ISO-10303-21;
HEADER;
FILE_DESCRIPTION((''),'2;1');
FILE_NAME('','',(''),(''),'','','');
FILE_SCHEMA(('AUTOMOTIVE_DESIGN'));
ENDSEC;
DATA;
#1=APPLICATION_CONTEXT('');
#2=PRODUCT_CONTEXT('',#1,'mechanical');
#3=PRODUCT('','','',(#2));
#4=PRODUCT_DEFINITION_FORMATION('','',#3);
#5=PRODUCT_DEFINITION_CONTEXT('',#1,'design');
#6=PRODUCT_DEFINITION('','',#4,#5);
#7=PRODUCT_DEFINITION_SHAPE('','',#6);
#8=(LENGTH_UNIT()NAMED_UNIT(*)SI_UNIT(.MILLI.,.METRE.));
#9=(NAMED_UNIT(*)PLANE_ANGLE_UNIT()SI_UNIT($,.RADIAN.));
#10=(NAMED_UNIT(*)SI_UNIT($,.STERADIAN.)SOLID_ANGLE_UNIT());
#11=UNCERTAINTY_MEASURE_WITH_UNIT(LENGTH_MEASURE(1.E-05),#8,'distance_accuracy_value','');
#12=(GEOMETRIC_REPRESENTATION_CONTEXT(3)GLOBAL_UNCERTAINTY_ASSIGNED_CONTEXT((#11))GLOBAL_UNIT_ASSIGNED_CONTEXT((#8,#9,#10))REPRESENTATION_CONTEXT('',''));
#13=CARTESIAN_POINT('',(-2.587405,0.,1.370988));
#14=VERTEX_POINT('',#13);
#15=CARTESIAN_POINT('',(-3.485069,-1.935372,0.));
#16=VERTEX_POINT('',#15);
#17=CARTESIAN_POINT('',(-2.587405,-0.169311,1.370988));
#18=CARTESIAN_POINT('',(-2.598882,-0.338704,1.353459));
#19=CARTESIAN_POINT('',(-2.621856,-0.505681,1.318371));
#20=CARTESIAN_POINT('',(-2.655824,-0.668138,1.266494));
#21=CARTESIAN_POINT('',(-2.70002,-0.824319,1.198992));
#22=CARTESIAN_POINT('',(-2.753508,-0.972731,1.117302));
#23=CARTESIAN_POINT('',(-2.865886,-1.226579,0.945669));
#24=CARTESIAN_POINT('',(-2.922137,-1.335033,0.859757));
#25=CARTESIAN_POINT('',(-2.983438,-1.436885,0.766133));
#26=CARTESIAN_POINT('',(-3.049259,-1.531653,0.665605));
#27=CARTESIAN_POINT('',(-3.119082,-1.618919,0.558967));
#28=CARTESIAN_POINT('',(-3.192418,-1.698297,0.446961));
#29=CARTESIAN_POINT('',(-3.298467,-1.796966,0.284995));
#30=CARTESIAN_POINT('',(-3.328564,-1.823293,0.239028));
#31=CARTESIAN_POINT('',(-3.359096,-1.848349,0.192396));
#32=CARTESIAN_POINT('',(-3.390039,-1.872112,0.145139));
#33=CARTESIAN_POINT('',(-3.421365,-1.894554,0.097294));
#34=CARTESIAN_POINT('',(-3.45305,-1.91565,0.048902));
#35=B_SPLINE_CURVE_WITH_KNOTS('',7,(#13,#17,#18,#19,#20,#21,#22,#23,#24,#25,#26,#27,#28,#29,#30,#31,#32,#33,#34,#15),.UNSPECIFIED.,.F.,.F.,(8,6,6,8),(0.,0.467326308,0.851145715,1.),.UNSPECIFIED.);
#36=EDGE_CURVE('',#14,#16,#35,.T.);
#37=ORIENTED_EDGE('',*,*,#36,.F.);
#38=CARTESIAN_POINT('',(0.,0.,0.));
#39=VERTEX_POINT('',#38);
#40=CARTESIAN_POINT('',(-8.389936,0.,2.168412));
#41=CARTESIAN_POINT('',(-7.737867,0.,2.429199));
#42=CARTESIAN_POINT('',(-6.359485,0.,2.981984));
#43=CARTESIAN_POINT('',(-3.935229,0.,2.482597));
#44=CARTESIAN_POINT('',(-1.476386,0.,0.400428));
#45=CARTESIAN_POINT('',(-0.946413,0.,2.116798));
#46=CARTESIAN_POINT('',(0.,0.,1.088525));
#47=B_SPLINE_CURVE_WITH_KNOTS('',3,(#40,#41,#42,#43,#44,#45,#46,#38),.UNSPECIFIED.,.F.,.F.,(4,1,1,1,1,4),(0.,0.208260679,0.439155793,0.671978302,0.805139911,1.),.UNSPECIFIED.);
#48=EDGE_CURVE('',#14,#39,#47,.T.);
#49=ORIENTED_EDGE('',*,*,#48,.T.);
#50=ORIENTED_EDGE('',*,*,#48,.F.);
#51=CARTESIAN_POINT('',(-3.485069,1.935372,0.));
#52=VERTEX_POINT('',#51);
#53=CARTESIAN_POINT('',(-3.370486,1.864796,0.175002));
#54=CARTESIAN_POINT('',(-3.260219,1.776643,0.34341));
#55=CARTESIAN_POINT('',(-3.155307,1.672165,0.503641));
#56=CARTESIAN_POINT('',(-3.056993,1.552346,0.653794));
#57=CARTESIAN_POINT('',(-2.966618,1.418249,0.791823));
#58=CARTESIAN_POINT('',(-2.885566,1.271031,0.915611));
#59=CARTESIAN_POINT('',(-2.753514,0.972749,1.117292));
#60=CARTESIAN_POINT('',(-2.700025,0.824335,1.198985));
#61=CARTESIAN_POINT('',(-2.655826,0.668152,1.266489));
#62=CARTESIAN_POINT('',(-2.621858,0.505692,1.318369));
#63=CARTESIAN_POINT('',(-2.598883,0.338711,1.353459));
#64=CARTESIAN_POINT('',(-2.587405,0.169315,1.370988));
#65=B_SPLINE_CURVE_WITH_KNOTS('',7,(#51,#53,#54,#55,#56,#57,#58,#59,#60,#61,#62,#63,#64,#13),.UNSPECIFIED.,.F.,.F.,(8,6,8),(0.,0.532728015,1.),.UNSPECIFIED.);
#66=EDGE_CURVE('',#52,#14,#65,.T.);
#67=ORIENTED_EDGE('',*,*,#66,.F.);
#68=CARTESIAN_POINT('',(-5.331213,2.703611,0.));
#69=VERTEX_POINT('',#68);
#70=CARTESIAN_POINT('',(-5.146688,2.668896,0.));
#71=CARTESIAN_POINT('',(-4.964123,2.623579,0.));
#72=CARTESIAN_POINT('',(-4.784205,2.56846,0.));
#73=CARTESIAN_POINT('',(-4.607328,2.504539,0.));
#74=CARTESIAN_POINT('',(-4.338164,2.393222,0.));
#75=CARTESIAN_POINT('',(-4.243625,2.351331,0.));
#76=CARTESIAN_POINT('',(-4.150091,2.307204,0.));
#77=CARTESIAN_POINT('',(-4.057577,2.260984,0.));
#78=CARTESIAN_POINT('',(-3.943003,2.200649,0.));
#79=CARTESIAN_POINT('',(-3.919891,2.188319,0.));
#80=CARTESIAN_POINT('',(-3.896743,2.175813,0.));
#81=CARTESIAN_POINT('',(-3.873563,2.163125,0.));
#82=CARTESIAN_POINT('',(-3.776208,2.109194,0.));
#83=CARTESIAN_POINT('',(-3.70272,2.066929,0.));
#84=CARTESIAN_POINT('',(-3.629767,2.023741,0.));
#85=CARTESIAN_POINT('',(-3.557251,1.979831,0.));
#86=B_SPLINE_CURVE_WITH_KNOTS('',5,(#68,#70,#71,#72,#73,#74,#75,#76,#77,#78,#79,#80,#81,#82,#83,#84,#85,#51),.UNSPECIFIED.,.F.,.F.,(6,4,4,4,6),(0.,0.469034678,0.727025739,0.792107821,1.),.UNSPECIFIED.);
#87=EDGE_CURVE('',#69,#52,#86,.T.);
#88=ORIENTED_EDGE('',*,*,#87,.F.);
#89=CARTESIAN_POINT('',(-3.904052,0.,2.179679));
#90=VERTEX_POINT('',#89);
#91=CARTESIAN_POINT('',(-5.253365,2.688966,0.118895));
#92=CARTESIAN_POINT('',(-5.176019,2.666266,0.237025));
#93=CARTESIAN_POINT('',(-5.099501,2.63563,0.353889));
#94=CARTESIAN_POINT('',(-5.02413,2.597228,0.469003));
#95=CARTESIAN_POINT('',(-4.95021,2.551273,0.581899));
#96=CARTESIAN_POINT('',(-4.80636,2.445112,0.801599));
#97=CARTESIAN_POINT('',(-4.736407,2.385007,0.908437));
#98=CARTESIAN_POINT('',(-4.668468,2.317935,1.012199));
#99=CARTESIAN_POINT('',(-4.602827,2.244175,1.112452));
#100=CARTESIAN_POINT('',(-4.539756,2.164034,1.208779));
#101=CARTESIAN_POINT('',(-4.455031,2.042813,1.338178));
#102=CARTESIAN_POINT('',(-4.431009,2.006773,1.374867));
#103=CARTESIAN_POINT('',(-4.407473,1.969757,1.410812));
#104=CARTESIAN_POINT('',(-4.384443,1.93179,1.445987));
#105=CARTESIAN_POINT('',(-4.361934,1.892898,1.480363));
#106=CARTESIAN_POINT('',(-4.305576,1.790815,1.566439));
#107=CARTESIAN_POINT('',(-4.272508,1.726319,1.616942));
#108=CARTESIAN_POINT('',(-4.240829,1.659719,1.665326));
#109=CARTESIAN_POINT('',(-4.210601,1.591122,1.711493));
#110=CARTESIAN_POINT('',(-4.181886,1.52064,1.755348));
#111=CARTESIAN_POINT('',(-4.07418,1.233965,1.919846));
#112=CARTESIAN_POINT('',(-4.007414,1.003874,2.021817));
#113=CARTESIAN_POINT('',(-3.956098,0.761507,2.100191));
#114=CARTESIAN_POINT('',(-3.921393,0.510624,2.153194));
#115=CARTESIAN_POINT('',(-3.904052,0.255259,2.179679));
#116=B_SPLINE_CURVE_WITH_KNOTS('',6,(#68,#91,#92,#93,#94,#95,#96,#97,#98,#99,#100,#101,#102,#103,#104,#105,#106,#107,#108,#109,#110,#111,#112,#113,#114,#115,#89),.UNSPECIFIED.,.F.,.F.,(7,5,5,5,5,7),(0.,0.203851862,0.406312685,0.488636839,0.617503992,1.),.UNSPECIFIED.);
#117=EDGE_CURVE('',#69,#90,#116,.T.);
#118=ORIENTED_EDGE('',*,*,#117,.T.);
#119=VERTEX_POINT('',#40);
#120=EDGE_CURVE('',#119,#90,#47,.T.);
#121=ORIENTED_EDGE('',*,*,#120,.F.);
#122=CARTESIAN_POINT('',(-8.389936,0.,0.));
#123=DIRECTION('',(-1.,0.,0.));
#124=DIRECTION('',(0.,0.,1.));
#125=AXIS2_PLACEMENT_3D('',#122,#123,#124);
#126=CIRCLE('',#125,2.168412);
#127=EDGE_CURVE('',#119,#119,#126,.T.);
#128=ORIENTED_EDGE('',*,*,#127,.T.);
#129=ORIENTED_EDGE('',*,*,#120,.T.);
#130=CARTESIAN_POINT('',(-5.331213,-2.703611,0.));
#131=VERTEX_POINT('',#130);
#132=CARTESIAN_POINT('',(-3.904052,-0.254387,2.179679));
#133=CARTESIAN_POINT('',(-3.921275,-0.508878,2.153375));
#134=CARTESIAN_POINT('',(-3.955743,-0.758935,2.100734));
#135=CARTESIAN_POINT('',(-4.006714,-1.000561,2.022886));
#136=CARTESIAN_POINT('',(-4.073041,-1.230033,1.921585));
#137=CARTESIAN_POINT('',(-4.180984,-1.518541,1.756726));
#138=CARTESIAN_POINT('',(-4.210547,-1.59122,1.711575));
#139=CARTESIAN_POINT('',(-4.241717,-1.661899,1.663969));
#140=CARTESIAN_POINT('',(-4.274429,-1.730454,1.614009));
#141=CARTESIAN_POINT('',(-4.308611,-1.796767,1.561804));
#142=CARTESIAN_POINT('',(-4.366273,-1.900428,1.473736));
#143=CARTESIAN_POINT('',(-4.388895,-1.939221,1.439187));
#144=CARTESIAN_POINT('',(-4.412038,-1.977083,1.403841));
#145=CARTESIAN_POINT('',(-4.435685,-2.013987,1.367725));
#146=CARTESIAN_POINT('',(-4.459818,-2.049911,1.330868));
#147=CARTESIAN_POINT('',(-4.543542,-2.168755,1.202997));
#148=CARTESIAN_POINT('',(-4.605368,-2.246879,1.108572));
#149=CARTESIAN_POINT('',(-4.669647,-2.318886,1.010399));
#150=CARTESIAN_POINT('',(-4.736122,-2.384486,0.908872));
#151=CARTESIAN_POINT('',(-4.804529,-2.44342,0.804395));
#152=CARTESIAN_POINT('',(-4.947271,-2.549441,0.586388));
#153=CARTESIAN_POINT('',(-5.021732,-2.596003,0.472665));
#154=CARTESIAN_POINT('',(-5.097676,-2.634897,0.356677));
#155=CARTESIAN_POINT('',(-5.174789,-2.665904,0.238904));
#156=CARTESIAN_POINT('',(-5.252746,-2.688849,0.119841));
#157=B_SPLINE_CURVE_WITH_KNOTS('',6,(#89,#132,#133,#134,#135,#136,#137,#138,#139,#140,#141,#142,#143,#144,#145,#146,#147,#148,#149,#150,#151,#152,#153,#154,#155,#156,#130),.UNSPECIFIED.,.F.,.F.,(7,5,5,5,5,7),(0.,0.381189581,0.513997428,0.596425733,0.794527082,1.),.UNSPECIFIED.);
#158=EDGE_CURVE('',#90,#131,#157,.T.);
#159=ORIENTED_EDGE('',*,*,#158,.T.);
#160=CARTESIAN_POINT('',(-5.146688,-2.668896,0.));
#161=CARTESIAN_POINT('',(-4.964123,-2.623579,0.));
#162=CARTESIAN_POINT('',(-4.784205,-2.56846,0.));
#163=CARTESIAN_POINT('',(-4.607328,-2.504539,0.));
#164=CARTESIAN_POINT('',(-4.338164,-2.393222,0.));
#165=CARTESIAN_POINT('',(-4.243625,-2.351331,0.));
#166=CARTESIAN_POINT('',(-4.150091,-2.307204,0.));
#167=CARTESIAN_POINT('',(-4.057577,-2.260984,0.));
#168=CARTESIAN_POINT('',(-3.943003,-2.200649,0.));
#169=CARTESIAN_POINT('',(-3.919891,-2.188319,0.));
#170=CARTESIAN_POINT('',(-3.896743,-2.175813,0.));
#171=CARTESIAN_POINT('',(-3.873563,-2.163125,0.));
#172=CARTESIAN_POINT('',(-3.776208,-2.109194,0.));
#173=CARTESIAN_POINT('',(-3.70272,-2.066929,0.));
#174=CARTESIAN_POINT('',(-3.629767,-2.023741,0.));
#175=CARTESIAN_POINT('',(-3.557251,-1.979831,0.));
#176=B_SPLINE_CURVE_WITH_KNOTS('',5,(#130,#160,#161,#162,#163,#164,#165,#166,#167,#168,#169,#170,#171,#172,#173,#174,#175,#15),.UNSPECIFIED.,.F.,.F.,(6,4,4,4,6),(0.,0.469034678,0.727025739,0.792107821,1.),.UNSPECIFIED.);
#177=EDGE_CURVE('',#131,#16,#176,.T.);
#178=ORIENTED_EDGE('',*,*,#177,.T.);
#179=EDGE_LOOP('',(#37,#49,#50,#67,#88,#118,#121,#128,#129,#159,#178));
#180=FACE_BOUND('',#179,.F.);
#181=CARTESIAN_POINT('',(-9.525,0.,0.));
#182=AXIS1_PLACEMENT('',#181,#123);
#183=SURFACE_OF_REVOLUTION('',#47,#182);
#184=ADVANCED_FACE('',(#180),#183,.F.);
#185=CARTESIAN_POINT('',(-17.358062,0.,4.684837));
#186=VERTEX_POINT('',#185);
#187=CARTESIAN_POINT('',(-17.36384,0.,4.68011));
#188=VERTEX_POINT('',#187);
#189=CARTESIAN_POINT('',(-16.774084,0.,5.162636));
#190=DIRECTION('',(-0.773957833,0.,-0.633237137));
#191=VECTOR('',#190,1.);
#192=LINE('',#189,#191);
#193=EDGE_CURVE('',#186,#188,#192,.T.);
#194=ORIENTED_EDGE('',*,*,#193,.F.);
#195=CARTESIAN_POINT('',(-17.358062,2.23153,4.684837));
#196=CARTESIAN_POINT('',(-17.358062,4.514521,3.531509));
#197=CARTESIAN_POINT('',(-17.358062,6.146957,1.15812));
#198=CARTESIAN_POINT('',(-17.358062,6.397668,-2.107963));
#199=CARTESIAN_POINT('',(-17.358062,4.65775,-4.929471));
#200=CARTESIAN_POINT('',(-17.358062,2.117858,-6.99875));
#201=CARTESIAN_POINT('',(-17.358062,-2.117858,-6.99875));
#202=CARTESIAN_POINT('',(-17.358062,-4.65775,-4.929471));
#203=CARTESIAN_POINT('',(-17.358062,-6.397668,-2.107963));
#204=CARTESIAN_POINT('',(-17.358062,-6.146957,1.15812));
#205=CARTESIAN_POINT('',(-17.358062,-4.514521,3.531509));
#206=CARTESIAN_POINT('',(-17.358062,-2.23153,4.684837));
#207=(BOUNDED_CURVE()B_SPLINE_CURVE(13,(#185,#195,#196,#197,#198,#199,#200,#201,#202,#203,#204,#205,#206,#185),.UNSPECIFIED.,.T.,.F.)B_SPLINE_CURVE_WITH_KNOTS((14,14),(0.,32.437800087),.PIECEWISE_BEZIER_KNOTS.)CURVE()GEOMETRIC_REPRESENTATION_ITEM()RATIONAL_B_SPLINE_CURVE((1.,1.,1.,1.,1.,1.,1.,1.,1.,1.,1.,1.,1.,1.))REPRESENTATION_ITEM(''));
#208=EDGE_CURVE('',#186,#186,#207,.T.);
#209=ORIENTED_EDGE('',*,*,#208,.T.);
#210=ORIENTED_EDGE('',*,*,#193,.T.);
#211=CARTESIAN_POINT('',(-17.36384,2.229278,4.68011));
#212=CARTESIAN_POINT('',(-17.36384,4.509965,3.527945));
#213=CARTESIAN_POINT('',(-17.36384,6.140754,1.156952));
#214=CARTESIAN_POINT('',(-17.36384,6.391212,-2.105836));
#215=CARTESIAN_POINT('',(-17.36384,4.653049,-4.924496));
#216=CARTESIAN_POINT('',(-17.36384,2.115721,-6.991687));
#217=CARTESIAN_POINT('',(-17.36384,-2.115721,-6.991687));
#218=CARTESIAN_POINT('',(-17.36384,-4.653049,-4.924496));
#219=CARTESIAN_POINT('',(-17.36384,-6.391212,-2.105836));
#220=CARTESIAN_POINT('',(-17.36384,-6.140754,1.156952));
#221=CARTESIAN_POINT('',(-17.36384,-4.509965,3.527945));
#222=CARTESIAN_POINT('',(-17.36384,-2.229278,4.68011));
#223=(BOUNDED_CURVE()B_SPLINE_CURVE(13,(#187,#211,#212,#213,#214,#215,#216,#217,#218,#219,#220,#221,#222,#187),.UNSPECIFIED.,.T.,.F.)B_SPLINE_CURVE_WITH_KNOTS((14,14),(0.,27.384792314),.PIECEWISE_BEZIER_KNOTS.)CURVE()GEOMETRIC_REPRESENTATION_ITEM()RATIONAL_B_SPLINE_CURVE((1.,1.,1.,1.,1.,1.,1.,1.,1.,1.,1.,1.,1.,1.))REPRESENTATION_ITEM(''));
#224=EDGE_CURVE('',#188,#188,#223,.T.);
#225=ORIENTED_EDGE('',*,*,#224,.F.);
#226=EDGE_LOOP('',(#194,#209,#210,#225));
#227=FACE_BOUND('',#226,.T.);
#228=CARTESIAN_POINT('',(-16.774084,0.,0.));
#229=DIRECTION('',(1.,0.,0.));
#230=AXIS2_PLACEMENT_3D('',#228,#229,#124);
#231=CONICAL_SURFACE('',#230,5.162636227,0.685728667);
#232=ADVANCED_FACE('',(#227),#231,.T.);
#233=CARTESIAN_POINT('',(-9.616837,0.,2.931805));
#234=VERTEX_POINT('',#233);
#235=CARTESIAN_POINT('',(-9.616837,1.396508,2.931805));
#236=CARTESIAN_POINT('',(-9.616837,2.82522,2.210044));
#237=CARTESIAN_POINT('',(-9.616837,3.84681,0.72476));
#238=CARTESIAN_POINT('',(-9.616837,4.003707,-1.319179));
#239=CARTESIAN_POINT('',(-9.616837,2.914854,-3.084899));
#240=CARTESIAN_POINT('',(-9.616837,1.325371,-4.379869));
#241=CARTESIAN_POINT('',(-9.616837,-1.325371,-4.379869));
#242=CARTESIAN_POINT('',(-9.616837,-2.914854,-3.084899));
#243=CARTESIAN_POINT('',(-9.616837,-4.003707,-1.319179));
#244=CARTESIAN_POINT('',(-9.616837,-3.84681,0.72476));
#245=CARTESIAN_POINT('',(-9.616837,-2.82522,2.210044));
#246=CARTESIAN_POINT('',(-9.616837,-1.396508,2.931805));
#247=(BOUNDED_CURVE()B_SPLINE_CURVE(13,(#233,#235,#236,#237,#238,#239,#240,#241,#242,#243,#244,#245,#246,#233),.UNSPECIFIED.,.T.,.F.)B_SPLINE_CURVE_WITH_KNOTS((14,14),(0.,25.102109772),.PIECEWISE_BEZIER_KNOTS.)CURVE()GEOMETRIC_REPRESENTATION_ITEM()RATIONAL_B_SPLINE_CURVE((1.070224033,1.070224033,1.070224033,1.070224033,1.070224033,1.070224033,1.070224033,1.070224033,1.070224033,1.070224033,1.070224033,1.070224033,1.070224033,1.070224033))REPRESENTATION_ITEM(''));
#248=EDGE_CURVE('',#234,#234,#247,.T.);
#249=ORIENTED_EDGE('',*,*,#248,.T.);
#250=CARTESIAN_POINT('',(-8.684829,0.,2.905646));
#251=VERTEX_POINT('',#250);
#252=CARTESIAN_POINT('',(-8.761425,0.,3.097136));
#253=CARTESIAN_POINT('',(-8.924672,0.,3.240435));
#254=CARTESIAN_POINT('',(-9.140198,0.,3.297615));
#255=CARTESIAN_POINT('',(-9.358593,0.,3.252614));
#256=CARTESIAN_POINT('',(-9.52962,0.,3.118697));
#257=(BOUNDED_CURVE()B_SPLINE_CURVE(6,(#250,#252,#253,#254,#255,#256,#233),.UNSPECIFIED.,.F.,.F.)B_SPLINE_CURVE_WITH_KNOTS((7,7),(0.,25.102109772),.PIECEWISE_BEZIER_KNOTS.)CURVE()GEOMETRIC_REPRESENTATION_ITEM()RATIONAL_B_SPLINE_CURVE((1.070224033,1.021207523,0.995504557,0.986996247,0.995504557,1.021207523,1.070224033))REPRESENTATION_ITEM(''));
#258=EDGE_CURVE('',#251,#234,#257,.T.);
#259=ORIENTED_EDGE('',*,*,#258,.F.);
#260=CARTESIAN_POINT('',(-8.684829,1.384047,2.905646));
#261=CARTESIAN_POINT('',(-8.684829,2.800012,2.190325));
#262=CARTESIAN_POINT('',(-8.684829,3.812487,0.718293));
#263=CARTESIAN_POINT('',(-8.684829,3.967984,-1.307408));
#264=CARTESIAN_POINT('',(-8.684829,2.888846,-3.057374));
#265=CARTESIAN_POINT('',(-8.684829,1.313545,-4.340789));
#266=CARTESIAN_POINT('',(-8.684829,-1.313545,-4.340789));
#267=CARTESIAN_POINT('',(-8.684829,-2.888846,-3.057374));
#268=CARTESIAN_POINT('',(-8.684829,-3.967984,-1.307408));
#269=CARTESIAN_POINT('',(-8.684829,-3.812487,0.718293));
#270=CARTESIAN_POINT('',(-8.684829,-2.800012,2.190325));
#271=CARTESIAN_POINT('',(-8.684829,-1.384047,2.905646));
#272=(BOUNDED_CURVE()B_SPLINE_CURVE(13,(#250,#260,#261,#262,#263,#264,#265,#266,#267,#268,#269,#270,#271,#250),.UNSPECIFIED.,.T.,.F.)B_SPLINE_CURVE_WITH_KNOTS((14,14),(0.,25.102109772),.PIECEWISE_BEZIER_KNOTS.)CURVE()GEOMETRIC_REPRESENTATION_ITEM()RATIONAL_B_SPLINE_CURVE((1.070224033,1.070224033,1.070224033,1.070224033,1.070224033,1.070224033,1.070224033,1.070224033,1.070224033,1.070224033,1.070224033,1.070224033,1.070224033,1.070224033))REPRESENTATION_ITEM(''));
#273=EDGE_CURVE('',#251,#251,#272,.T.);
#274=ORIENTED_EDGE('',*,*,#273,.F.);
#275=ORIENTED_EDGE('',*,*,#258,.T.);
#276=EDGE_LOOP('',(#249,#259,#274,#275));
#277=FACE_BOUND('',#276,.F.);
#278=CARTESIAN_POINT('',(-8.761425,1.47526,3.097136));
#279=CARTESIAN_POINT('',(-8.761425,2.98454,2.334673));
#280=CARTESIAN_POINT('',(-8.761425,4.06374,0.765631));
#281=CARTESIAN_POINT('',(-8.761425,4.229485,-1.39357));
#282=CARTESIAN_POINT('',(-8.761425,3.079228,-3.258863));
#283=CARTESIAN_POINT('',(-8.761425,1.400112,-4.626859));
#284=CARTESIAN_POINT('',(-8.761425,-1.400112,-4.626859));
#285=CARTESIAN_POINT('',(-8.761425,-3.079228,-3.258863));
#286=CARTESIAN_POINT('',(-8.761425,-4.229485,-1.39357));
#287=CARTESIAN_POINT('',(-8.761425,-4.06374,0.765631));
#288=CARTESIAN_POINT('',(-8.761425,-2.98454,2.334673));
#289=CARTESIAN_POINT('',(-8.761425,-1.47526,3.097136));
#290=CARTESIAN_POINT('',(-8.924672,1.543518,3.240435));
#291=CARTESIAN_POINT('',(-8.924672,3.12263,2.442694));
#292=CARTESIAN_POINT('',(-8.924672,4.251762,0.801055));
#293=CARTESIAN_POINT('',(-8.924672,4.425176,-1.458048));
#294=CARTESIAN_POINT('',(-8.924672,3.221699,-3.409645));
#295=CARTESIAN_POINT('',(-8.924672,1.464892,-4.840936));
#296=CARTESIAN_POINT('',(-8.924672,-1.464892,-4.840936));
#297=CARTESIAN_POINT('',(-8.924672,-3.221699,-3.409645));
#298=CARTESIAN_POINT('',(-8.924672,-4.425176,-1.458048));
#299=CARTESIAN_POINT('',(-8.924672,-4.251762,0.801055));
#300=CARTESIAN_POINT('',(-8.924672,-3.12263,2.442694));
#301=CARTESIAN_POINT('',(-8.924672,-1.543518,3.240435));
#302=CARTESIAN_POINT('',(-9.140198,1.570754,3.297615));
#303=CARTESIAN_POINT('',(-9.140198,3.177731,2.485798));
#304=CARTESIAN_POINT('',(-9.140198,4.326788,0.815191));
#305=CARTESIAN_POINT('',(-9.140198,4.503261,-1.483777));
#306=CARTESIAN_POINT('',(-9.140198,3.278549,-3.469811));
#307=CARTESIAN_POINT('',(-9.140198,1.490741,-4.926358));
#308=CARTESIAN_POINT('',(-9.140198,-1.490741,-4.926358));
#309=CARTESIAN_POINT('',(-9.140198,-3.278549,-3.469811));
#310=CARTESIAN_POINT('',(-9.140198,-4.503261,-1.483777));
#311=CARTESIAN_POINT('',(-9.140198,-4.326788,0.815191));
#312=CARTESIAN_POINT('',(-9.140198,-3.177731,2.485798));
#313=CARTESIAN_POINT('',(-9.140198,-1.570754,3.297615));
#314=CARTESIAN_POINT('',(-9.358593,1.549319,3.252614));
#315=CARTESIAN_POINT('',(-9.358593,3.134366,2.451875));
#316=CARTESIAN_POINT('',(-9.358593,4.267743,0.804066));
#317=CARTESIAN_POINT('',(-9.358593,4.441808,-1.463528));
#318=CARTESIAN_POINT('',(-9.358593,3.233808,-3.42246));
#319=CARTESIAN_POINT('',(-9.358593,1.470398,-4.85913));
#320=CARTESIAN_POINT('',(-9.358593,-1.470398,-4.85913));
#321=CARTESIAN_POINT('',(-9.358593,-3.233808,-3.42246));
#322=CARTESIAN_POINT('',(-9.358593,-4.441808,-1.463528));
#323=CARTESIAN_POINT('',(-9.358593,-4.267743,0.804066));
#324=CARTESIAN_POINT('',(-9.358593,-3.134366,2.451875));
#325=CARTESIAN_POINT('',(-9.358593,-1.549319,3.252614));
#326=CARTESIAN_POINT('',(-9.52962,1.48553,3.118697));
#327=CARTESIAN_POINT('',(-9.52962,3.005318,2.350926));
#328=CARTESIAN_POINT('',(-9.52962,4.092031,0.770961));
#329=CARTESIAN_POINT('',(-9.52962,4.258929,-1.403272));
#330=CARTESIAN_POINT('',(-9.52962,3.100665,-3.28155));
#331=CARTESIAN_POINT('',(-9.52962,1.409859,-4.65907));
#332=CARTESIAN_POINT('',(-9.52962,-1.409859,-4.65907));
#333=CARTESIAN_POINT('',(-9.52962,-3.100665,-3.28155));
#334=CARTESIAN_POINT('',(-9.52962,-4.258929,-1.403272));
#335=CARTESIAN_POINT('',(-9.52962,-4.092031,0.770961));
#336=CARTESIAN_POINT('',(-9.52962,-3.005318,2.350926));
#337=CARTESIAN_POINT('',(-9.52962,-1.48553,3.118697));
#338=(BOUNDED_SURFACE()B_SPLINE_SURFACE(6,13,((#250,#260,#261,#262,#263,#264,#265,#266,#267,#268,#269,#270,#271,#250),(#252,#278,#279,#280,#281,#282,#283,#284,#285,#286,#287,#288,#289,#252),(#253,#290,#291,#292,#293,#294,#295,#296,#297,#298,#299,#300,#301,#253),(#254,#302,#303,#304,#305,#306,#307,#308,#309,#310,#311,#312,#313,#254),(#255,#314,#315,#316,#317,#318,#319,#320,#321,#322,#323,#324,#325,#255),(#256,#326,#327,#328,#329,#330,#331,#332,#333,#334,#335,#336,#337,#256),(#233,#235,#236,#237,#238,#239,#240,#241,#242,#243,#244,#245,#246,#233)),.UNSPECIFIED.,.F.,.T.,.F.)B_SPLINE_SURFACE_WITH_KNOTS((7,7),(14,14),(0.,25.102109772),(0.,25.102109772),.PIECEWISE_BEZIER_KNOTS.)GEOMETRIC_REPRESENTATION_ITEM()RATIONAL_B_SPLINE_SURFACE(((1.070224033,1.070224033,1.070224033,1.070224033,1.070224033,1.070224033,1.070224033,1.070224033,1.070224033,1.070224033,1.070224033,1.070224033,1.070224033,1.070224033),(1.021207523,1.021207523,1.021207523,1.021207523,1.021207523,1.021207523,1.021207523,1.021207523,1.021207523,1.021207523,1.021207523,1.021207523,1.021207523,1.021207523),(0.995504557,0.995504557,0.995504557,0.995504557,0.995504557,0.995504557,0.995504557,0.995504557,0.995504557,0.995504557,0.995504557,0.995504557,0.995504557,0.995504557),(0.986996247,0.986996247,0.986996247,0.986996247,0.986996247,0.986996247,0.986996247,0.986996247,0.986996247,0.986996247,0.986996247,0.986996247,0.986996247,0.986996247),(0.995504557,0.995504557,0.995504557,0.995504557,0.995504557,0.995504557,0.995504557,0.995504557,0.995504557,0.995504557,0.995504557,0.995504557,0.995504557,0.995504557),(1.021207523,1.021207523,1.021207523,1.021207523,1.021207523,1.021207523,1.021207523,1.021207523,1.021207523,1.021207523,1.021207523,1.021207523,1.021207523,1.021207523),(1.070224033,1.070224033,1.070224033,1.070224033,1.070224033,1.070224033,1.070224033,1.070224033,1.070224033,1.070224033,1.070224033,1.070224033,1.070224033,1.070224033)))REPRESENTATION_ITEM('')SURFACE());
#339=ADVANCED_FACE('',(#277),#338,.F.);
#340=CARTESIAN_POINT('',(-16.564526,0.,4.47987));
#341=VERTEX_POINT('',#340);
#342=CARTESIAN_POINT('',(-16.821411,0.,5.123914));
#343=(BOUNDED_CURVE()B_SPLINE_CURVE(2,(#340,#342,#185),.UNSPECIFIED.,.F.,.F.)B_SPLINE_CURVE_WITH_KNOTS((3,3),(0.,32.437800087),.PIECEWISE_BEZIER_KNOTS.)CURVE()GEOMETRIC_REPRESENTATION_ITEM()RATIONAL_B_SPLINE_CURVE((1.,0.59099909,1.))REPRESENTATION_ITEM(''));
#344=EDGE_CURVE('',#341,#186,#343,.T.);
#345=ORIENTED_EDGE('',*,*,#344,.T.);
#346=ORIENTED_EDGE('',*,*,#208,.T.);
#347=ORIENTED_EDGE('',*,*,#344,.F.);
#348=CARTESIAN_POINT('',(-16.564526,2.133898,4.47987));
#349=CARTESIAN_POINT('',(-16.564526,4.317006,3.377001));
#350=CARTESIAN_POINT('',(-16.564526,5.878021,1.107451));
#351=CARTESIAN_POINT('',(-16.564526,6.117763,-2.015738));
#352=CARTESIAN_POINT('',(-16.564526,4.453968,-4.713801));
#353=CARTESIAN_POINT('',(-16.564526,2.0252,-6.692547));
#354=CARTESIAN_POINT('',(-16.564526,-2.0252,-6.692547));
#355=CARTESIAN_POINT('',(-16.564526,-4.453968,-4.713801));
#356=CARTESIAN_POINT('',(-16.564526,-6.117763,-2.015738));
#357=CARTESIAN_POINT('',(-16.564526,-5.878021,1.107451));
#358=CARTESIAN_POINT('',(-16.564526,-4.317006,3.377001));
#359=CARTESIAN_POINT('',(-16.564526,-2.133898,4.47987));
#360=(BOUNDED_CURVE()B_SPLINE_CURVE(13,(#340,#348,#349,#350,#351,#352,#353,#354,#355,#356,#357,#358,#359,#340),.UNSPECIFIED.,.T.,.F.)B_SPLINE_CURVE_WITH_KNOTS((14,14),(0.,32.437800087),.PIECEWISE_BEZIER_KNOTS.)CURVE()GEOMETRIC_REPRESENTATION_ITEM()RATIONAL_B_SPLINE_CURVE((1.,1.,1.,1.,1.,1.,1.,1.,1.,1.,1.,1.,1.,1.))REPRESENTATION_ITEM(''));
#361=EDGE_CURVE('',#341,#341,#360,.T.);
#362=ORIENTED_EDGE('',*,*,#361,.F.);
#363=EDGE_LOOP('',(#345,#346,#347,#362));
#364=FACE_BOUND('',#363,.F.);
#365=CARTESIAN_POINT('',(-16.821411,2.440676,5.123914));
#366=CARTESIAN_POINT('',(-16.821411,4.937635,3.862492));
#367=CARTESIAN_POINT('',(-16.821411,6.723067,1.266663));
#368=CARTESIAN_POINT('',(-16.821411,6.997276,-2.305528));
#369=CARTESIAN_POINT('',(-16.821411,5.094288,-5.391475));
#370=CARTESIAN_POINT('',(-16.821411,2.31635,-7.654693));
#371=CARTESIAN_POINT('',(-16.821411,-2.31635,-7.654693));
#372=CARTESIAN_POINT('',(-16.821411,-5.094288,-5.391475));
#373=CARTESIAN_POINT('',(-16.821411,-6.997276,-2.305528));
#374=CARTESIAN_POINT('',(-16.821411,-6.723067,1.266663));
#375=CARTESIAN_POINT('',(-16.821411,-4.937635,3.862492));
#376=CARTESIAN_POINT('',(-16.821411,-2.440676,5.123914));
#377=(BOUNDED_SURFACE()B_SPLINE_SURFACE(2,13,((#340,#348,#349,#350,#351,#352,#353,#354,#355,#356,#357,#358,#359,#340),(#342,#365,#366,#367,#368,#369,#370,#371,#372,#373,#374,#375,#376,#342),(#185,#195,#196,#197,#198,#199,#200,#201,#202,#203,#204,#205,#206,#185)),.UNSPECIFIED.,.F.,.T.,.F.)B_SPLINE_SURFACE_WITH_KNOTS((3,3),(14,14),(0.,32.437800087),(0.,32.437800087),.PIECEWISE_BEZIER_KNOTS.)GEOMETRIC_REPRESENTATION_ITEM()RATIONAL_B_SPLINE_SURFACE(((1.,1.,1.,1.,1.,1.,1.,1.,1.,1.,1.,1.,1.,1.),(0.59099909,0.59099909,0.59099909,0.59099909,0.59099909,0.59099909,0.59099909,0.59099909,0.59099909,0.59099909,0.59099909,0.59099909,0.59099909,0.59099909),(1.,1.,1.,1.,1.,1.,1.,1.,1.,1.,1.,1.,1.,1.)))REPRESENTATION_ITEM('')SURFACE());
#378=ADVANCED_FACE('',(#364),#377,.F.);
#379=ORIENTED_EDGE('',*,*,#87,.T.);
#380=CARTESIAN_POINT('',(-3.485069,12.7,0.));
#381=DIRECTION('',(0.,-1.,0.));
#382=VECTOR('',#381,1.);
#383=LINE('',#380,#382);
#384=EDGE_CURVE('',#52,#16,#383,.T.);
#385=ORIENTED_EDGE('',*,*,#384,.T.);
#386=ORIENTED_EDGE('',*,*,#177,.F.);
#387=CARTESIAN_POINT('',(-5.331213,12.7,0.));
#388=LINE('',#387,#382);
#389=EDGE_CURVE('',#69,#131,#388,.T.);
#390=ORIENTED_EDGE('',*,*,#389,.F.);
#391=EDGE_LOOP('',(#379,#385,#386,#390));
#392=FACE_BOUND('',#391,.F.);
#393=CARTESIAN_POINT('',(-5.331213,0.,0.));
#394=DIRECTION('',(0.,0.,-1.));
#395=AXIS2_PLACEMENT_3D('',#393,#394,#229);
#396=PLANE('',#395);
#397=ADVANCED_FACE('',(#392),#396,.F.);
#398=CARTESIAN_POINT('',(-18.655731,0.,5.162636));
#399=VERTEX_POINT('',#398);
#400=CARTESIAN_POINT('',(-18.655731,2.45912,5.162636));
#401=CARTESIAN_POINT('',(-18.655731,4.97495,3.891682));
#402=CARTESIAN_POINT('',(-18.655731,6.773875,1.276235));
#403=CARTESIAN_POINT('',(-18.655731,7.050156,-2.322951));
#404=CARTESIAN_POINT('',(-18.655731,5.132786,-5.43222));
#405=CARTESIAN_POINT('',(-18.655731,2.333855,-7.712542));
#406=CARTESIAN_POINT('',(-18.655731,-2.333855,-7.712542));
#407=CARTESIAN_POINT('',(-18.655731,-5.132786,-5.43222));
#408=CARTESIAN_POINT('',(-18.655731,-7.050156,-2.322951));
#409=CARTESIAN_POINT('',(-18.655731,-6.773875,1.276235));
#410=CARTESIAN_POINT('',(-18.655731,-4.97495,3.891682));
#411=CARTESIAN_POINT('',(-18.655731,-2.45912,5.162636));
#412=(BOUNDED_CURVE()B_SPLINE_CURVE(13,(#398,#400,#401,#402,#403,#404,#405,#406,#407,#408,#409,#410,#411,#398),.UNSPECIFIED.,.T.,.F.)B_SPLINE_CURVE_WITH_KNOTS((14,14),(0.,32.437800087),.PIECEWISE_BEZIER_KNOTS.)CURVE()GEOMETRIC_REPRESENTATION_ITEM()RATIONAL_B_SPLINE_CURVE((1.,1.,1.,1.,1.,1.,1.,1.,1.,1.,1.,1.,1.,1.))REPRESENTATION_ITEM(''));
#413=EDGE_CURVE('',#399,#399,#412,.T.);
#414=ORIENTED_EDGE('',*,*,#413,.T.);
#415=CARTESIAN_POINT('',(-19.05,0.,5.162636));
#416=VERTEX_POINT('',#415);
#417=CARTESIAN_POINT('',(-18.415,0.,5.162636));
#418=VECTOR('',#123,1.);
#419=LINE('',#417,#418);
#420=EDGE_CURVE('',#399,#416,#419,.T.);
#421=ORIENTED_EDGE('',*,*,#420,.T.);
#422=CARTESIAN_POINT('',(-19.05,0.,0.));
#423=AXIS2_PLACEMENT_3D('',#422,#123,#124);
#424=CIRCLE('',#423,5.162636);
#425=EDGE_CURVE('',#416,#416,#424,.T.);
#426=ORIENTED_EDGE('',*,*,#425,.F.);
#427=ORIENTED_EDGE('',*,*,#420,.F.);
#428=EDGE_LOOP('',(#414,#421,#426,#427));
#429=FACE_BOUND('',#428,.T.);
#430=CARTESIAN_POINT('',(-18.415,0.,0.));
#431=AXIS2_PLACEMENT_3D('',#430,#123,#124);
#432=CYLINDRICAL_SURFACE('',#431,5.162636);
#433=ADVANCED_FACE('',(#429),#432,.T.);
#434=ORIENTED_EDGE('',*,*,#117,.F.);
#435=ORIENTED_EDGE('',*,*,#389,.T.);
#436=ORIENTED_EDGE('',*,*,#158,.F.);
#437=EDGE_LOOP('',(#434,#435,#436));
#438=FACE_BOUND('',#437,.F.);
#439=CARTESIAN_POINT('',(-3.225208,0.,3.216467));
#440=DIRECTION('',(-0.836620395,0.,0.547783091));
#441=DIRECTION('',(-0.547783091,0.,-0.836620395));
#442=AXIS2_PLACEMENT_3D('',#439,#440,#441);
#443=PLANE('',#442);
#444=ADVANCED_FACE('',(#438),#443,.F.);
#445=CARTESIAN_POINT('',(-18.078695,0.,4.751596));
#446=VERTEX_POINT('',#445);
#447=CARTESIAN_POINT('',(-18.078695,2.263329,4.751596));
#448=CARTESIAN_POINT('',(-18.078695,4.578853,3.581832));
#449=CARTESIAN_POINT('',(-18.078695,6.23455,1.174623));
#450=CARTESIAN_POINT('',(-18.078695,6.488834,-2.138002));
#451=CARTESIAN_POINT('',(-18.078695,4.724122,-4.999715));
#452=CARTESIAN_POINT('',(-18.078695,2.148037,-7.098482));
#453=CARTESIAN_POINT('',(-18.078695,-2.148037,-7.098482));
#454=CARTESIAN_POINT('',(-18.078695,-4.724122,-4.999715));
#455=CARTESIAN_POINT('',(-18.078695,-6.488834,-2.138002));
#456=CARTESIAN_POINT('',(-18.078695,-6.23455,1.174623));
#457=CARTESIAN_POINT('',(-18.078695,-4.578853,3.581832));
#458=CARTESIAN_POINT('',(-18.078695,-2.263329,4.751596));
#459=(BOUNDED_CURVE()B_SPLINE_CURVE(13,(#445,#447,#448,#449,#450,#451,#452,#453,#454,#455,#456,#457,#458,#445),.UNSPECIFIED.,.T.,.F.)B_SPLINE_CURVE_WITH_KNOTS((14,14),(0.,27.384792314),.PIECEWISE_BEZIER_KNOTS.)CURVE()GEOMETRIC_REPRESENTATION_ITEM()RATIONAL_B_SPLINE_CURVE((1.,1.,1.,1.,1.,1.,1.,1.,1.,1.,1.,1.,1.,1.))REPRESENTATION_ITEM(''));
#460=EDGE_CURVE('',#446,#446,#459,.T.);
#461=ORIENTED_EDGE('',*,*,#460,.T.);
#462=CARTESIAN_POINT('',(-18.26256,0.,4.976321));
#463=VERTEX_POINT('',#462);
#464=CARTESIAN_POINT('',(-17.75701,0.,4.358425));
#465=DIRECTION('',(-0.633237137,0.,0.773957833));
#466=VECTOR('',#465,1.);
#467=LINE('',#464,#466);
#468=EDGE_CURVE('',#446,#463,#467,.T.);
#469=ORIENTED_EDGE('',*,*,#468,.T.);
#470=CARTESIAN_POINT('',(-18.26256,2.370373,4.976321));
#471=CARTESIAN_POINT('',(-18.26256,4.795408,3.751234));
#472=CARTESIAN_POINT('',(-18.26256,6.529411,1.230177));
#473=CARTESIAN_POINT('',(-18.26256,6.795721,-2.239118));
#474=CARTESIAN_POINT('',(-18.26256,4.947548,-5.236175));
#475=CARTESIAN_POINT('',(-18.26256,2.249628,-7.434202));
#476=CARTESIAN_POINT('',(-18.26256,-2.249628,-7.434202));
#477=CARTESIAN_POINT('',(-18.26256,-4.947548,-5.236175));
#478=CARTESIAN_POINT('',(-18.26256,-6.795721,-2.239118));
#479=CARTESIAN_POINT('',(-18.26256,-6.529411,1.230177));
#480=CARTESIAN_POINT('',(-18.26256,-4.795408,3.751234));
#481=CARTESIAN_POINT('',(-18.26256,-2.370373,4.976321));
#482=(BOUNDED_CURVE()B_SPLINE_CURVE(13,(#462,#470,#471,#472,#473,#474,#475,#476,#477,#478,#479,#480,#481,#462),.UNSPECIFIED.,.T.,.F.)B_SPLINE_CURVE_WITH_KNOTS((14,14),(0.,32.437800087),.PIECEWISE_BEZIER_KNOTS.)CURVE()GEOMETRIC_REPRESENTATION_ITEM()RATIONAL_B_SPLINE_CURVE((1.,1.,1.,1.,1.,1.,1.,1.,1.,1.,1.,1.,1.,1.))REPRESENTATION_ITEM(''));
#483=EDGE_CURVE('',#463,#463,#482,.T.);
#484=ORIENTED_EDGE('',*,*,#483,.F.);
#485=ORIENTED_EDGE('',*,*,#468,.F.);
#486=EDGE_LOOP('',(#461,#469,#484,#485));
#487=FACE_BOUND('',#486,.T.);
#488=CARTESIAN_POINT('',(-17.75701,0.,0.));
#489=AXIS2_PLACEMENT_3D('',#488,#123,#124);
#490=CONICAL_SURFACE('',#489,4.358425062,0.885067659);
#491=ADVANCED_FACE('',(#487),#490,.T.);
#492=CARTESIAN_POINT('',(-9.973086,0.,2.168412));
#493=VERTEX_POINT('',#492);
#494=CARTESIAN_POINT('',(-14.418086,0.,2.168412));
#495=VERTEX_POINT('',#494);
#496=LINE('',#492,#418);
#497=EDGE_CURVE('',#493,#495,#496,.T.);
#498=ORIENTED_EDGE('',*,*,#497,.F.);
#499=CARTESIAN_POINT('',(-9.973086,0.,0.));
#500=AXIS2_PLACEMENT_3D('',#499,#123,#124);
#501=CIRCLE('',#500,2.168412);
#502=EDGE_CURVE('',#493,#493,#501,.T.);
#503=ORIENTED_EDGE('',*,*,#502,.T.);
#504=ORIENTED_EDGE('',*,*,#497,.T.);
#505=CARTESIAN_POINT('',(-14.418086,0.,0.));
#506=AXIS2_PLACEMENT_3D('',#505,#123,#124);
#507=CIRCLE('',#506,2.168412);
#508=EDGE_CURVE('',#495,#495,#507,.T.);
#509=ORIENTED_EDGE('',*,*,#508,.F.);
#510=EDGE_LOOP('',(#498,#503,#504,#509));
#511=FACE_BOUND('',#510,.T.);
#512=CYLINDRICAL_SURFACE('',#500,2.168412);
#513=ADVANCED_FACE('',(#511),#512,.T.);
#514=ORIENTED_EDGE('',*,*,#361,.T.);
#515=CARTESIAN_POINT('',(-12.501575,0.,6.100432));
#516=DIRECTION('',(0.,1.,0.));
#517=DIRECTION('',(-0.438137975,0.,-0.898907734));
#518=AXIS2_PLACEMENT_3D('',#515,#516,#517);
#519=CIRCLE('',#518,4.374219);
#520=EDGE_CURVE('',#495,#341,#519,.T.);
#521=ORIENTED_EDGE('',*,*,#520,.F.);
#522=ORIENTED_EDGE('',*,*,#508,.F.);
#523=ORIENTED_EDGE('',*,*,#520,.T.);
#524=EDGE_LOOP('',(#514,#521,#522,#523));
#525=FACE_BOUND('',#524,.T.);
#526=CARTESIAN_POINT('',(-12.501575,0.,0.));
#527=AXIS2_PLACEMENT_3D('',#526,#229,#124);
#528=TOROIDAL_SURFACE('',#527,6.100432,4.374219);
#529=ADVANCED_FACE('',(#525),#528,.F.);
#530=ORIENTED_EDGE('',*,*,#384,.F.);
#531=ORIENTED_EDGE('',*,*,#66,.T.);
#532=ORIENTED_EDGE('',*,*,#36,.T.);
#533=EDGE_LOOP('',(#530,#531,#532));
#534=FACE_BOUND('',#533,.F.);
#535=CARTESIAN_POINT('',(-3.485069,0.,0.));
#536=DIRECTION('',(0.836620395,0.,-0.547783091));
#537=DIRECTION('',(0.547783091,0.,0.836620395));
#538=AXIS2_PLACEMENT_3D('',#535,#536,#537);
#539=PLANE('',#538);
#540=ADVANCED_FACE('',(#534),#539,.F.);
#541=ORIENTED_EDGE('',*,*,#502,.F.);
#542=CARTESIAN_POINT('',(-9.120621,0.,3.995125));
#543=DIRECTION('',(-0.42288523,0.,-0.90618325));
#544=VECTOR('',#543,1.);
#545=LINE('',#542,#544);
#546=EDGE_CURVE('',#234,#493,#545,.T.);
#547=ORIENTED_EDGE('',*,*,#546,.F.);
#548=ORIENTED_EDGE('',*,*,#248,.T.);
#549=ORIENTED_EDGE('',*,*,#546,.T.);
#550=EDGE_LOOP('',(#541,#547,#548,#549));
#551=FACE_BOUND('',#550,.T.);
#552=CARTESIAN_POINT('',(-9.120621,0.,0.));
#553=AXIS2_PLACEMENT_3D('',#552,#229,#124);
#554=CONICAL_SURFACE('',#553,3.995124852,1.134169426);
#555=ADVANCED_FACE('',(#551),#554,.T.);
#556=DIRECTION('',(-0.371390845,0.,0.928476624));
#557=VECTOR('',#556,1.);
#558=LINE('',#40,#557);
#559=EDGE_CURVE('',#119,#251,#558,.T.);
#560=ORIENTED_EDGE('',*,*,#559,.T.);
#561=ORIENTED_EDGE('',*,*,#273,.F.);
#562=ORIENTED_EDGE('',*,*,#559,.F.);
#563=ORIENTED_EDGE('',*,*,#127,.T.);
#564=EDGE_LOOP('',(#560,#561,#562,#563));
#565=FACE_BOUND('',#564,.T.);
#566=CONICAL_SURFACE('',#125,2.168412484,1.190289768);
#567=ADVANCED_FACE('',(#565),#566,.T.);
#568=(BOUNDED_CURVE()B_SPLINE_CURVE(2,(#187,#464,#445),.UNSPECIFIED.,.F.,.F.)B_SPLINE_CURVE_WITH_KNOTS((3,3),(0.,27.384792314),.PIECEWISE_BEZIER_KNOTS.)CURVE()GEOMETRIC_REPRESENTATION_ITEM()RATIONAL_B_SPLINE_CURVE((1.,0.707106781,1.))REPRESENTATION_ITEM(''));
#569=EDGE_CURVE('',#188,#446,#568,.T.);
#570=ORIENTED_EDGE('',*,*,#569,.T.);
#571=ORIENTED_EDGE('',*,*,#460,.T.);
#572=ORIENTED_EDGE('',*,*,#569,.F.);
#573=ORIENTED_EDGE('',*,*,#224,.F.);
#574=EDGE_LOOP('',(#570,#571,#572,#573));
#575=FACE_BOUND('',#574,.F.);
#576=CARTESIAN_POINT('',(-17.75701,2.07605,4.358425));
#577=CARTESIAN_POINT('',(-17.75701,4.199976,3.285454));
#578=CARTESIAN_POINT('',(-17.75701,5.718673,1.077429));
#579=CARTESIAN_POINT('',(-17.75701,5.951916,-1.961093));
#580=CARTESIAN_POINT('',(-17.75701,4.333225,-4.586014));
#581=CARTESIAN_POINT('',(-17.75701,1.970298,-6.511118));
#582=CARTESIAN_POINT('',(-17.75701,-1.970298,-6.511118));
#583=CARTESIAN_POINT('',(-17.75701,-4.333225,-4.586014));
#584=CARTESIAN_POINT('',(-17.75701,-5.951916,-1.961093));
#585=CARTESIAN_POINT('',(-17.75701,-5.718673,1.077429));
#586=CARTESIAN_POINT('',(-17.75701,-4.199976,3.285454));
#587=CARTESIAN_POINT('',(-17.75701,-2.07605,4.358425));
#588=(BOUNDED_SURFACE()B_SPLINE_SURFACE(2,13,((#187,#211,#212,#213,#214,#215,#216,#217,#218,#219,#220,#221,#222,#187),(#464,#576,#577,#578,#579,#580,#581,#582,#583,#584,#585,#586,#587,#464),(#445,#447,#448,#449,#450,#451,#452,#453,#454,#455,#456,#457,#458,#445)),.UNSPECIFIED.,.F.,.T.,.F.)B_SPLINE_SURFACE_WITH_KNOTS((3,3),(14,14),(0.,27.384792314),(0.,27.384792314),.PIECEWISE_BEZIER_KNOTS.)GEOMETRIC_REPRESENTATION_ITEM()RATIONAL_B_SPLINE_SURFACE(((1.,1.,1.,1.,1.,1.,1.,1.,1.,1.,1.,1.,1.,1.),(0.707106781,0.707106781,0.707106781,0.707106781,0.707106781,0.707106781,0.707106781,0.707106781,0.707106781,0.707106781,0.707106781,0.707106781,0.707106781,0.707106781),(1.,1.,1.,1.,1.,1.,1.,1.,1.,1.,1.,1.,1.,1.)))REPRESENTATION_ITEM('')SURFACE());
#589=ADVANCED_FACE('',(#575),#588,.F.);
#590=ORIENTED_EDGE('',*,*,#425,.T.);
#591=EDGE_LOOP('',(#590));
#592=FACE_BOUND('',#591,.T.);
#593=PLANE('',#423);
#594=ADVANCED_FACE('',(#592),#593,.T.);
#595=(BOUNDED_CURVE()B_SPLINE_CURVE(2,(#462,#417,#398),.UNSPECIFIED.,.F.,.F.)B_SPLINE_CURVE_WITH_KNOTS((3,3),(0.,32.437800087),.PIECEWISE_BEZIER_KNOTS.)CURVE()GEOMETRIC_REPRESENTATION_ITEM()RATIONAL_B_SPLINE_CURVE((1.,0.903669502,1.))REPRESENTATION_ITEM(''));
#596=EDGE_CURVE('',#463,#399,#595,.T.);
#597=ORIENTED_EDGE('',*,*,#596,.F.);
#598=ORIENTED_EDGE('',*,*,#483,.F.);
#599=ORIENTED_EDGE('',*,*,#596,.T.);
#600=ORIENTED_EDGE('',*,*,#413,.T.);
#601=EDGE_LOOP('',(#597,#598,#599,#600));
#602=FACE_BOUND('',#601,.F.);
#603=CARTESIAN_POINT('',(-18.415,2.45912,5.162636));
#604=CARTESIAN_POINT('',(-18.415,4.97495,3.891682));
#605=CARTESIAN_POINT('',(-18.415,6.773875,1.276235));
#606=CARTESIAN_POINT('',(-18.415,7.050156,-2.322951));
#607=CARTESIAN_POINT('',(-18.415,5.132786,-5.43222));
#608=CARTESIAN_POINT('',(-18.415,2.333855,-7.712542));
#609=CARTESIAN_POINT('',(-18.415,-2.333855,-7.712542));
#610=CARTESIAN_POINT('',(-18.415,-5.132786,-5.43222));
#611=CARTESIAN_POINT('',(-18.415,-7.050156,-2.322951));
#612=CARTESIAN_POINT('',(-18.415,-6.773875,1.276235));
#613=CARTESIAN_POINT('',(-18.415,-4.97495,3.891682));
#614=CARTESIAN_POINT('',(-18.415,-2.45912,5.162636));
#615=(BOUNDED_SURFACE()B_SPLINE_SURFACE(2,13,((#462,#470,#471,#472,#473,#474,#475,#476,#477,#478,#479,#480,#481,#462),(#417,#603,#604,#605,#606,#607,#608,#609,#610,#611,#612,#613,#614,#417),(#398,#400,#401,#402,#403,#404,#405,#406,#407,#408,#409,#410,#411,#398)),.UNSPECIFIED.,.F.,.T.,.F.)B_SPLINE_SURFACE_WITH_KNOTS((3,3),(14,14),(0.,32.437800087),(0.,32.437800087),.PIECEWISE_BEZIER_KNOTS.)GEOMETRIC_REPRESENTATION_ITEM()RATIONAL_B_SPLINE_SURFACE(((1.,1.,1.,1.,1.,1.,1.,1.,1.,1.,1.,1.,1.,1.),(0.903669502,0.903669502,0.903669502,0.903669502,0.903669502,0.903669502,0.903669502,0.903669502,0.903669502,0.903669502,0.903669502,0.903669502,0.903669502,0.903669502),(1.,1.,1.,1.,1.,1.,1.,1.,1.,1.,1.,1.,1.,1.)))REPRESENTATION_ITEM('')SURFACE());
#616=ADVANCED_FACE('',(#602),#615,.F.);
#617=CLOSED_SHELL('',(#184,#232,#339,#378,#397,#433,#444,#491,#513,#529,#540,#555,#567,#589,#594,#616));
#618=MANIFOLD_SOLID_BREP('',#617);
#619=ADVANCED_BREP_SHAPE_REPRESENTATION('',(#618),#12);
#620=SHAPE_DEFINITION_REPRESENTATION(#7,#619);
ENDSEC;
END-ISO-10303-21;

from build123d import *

# Parameters (mm, degrees)
F2_R     = 0.508
F4_DEPTH = 12.7


# Not quite as in the source:
# - a feature names something its author has since deleted; it is built from what else it names


with BuildPart() as f1:
    # F0 (on Front) → F1 (revolve)
    with BuildSketch(Plane.XZ):
        with BuildLine():
            Line((-19.05, 0), (0, 0))
            add(Edge.make_bspline(
                [(-8.3899357133, 2.1684124839), (-7.7378666571, 2.4291994979), (-6.3594848769, 2.9819840205), (-3.9352286815, 2.4825970716), (-1.4763863238, 0.40042843), (-0.9464125078, 2.1167979641), (0, 1.088525285), (0, 0)],
                knots=[0, 0, 0, 0, 0.208260679, 0.4391557931, 0.6719783024, 0.8051399106, 1, 1, 1, 1], degree=3))
            Line((-8.3899357133, 2.1684124839), (-9.1206210449, 3.9951248522))
            Line((-9.1206210449, 3.9951248522), (-9.9730862403, 2.1684124839))
            Line((-9.9730862403, 2.1684124839), (-14.4180862403, 2.1684124839))
            ThreePointArc((-14.4180862403, 2.1684124839), (-15.9392101959, 3.3955371388), (-16.7740837313, 5.1626362268))
            Line((-16.7740837313, 5.1626362268), (-17.7570101797, 4.3584250623))
            Line((-17.7570101797, 4.3584250623), (-18.415, 5.1626362268))
            Line((-18.415, 5.1626362268), (-19.05, 5.1626362268))
            Line((-19.05, 5.1626362268), (-19.05, 0))
        make_face()
    revolve(axis=Axis((-9.525, 0, 0), (-1, 0, 0)))

    # F2
    f2_edges = [f1.edges().sort_by_distance(p)[0] for p in [
        (-9.120621, 0, -3.995125),
        (-16.774084, 0, -5.162636),
        (-18.415, 0, -5.162636),
        (-17.75701, 0, -4.358425),
    ]]
    fillet(f2_edges, radius=F2_R)

    # F3 (on Front) → F4 (cut, symmetric)
    with BuildSketch(Plane.XZ):
        Polygon((-3.2252084929, 3.2164666336), (-5.3312126547, 0), (-3.4850692019, 0), (-1.9330305021, 2.3704040014), align=None)
    extrude(amount=F4_DEPTH, both=True, mode=Mode.SUBTRACT)


solid = f1.part
